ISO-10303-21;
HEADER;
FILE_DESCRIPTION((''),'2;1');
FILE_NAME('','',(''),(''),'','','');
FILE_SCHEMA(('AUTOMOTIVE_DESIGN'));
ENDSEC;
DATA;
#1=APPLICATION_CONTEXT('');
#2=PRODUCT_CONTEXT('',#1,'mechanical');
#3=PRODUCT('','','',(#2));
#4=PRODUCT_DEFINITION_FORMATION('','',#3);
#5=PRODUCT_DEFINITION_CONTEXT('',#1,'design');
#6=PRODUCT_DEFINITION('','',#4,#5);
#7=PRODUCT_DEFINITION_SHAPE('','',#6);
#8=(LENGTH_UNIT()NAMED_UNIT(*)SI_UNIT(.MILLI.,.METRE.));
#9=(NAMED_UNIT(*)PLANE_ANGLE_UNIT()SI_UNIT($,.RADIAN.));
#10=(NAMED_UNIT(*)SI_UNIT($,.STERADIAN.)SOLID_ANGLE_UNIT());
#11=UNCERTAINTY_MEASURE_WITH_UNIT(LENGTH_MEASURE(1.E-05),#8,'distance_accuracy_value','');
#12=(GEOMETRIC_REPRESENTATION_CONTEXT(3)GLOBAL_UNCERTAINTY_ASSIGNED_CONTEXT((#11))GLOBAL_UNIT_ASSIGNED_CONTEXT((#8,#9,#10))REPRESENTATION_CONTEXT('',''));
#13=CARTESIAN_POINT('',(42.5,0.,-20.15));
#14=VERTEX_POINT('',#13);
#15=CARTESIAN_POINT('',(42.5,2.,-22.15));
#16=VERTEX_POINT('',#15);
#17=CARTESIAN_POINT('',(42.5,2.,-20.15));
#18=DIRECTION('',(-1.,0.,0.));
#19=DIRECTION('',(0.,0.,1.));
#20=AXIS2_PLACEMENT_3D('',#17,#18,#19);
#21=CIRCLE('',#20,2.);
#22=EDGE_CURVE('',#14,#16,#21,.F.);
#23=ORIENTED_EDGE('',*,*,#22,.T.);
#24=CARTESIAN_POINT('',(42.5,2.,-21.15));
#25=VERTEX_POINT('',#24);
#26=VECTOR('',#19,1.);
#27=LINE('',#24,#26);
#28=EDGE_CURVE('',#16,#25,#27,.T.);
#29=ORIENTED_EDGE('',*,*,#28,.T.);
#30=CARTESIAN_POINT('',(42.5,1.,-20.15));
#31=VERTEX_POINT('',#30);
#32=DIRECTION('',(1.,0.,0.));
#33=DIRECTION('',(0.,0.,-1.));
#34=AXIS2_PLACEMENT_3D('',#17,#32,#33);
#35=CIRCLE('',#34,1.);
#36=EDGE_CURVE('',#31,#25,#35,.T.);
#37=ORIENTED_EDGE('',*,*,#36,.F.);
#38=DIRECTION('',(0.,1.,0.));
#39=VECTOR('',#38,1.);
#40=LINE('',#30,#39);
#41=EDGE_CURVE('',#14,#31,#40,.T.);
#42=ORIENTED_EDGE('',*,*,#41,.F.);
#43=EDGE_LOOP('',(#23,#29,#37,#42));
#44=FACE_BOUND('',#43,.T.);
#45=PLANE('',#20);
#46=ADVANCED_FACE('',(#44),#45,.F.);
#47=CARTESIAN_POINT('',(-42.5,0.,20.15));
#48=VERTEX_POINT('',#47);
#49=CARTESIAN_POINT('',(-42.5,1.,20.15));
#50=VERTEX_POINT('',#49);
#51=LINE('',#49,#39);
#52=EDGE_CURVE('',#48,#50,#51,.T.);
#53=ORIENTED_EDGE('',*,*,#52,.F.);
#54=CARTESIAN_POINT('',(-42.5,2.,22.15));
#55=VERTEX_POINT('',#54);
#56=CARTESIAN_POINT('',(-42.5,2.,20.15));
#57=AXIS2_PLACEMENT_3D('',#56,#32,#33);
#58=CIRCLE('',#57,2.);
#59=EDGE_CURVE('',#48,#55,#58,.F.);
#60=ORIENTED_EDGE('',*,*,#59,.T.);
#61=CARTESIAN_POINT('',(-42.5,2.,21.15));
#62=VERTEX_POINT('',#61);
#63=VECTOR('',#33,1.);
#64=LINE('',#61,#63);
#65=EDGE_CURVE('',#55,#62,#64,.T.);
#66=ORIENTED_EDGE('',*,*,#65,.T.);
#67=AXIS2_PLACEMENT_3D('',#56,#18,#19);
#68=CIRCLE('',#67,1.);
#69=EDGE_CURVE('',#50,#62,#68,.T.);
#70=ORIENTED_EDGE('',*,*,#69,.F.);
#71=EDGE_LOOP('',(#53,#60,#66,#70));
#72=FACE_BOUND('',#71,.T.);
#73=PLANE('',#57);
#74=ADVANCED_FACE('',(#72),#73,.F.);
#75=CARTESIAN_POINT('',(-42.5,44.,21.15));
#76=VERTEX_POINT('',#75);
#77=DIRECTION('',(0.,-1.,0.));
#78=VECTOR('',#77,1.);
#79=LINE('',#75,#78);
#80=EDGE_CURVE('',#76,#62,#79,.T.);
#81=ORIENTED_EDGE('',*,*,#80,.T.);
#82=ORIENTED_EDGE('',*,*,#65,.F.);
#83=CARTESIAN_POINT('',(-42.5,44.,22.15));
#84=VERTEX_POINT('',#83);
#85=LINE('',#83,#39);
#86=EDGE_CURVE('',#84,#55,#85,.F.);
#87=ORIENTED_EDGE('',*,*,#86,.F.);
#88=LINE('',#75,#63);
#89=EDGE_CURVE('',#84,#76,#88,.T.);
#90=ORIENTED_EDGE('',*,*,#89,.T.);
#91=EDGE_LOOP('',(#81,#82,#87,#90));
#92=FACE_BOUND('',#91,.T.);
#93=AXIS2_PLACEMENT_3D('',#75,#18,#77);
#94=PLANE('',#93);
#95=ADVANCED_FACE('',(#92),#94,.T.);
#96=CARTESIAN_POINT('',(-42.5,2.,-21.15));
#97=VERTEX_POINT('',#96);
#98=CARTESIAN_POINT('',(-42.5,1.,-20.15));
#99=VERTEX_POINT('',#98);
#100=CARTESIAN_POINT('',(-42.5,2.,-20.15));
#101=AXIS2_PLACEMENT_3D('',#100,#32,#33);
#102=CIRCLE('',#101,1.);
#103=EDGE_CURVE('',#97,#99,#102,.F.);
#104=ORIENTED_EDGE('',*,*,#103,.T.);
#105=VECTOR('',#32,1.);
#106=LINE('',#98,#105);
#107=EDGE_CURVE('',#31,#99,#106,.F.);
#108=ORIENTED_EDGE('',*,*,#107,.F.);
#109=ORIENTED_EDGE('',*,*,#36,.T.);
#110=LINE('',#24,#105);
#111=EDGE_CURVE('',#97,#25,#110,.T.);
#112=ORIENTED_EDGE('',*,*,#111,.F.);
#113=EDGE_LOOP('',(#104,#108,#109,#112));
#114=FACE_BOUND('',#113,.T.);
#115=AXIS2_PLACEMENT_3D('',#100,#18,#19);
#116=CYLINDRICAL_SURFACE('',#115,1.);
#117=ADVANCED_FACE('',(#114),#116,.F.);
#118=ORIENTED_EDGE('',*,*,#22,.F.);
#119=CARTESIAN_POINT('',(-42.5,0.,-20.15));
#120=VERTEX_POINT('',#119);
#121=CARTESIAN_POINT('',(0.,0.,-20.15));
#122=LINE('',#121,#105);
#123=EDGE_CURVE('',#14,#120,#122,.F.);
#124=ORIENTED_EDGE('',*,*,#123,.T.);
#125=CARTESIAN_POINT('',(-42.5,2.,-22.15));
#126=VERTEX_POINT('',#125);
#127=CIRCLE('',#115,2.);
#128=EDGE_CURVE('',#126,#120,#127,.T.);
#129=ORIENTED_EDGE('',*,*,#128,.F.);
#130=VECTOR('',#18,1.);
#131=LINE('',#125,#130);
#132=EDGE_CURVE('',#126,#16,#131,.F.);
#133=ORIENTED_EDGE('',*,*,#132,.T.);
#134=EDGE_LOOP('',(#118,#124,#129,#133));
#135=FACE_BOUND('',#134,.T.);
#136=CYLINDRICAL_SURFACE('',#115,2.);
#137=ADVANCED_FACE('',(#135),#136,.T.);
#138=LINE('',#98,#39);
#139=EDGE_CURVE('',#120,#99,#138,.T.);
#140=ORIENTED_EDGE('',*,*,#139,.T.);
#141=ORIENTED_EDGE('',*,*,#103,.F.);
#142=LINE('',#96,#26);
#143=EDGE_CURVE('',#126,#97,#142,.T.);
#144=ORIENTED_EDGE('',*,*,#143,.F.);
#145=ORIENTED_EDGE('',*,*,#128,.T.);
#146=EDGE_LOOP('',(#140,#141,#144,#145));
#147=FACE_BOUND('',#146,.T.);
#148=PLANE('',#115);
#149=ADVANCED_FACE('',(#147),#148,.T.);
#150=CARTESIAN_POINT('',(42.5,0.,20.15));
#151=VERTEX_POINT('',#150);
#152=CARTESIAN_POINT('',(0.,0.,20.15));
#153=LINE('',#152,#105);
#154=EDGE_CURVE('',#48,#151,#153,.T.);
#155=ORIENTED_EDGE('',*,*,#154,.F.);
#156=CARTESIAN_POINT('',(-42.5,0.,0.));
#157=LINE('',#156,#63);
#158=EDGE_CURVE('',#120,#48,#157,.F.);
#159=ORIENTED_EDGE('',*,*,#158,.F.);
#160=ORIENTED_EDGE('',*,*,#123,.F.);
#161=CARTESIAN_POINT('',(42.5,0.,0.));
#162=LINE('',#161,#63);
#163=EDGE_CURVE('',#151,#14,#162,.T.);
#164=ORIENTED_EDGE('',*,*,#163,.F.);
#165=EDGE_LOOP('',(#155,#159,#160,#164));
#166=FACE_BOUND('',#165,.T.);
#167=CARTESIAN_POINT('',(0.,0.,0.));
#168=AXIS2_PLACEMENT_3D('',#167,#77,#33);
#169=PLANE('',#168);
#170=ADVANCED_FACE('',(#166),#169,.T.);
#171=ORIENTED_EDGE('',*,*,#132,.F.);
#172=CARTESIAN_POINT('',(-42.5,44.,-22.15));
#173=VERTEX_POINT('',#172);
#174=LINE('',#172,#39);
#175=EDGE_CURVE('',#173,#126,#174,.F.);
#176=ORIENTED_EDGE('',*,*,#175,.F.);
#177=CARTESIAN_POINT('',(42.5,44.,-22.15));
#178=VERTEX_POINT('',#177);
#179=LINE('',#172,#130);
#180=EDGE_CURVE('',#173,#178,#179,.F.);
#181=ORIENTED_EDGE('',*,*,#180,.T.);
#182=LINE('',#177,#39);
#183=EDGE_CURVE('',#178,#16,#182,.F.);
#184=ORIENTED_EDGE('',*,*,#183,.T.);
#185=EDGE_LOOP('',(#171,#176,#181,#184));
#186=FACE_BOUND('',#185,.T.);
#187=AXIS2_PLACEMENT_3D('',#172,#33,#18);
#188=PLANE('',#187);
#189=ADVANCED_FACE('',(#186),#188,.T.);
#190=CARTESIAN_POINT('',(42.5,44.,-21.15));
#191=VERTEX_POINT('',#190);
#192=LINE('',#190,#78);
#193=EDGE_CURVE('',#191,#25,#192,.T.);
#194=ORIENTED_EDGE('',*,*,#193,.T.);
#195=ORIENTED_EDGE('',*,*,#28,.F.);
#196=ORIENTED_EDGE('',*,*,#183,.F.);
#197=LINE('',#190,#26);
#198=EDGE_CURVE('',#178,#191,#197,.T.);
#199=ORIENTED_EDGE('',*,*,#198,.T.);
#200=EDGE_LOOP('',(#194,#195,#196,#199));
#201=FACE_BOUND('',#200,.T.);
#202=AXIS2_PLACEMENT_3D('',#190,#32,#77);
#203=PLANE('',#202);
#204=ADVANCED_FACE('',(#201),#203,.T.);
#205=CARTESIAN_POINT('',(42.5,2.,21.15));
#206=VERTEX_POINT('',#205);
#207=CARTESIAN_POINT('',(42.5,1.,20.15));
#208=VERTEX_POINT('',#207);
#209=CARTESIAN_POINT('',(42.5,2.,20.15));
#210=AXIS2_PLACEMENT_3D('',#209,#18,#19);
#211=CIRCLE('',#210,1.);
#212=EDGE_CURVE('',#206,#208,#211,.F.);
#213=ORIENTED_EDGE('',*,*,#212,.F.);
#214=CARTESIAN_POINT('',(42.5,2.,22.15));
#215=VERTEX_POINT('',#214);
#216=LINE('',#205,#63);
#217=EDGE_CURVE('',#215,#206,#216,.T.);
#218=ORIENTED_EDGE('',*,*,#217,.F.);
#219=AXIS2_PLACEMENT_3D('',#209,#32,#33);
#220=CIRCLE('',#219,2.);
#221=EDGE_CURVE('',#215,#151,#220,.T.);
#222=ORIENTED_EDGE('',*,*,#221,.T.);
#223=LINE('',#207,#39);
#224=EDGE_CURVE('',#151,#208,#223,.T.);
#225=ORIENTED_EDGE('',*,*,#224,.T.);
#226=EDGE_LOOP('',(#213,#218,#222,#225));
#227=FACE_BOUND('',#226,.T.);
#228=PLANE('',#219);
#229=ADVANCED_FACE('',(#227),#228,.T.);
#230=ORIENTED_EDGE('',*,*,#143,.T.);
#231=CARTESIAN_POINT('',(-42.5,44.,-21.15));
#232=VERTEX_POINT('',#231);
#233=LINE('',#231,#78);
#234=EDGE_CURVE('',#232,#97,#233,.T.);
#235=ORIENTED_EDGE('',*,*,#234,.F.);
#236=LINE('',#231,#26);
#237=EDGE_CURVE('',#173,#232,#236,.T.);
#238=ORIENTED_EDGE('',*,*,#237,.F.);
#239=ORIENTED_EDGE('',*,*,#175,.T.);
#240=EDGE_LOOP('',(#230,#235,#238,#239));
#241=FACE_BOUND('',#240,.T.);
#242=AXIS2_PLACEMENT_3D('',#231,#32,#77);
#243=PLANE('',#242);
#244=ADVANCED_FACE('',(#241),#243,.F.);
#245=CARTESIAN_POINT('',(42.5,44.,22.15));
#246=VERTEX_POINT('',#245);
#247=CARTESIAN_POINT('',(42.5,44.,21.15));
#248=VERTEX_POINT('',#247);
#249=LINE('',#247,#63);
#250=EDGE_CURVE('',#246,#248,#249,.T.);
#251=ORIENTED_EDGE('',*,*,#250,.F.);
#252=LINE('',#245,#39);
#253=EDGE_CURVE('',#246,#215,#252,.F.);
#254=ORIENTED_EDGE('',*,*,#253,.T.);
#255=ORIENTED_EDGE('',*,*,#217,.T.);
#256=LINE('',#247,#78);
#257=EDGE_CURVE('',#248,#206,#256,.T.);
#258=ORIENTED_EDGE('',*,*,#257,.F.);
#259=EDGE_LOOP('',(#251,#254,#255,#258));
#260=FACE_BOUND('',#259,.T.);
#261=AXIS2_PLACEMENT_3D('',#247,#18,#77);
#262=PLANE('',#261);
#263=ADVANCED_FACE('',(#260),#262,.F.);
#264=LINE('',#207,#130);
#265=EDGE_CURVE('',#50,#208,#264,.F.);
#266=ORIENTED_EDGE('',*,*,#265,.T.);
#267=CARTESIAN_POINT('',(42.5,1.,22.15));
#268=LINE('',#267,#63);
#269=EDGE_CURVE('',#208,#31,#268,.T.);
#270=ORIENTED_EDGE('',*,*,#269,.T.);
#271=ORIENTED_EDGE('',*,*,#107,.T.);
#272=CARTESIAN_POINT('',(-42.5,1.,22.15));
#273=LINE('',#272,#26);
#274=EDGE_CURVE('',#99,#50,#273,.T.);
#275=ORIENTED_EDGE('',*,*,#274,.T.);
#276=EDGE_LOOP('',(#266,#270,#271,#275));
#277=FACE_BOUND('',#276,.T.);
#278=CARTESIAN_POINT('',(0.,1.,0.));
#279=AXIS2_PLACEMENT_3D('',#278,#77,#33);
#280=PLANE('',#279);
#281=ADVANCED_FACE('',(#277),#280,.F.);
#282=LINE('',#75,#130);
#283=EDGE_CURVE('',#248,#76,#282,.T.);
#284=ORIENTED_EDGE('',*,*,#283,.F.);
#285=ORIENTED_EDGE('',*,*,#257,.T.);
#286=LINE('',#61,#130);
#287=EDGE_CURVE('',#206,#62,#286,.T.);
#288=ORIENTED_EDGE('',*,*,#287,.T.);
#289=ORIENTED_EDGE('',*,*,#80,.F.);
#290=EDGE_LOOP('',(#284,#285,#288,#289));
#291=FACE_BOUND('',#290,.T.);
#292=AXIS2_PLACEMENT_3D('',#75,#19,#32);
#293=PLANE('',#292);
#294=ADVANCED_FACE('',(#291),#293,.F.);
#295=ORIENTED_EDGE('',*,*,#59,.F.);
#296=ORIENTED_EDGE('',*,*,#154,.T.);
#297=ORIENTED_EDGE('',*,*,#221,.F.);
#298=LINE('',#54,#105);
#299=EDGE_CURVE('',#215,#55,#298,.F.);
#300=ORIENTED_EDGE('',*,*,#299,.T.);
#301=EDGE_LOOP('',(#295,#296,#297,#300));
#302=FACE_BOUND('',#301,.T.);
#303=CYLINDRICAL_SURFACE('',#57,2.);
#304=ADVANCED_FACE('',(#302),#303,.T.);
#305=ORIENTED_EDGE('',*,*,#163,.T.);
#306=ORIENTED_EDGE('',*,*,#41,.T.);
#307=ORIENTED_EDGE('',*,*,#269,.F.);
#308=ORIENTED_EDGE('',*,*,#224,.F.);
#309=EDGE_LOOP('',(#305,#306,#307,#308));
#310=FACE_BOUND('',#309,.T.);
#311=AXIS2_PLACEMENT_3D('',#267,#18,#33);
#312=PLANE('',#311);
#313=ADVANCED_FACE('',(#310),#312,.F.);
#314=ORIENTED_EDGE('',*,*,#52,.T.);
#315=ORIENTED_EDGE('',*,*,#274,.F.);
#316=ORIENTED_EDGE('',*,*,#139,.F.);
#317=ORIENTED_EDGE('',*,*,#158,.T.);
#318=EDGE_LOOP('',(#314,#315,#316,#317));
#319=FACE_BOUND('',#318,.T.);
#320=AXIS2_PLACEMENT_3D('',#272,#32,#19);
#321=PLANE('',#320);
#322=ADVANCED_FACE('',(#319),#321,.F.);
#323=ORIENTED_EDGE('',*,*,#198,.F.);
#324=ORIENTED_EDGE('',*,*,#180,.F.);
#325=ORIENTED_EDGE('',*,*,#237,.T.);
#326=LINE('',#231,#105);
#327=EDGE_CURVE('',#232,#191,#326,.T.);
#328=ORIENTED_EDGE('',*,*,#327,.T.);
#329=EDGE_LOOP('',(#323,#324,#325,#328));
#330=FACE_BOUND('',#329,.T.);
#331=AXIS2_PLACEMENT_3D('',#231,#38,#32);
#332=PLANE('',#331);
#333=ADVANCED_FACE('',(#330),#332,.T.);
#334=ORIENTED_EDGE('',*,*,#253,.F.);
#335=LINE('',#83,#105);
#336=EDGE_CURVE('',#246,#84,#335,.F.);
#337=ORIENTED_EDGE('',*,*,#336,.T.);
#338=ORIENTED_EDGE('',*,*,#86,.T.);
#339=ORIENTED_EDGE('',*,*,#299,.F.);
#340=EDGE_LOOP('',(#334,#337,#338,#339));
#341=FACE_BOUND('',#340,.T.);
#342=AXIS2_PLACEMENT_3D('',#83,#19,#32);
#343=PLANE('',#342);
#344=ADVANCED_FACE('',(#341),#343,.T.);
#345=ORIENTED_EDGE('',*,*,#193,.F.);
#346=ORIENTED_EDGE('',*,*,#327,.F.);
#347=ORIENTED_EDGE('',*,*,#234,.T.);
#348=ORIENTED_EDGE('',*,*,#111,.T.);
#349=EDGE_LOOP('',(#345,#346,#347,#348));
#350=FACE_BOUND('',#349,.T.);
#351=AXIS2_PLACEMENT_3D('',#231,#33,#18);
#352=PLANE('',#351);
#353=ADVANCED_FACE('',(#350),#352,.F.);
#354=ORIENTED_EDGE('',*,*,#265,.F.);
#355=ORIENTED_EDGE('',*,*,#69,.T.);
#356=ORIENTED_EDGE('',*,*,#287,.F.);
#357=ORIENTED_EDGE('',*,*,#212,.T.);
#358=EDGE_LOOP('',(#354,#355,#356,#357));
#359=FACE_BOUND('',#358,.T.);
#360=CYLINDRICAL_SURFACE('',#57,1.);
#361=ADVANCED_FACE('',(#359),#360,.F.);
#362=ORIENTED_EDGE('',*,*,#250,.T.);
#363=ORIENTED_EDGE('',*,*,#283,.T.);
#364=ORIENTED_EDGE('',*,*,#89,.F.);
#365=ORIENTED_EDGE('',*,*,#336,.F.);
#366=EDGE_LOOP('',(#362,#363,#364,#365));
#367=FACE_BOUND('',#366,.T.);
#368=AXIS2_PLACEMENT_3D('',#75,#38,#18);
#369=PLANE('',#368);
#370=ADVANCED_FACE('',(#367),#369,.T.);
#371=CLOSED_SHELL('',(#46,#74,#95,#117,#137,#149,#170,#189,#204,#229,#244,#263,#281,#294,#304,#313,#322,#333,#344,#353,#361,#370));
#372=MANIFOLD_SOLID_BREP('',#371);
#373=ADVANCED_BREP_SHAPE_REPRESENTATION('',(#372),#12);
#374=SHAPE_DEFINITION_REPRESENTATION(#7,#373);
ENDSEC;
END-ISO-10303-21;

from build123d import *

# Parameters (mm, degrees)
SZKIC2_W                    = 85
SZKIC2_H                    = 44.3
DODANIE_WYCI_GNI_CIE1_DEPTH = 1
SZKIC7_W                    = 85
SZKIC7_H                    = 1
DODANIE_WYCI_GNI_CIE2_DEPTH = 43
KONWERTUJ_START             = -42.5
KONWERTUJ_BRY_1_DEPTH       = 85
KONWERTUJ_BRY_1_2_DEPTH     = 85


# Read off the part's stored shape, not the designer's step: Konwertuj bryłę1
with BuildPart() as part:
    # Szkic2 → Dodanie-wyciągnięcie1 (new body)
    with BuildSketch(Plane(origin=(0, 0, 0), x_dir=(1, 0, 0), z_dir=(0, 1, 0))):
        Rectangle(SZKIC2_W, SZKIC2_H)
    extrude(amount=DODANIE_WYCI_GNI_CIE1_DEPTH)

    # Szkic7 → Dodanie-wyciągnięcie2 (add)
    with BuildSketch(Plane(origin=(0, 1, 0), x_dir=(1, 0, 0), z_dir=(0, 1, 0))):
        with Locations((0, 21.65)):
            Rectangle(SZKIC7_W, SZKIC7_H)
        with Locations((0, -21.65)):
            Rectangle(SZKIC7_W, SZKIC7_H)
    extrude(amount=DODANIE_WYCI_GNI_CIE2_DEPTH)

    # Konwertuj bryłę1 outline → Konwertuj bryłę1 (cut)
    with BuildSketch(Plane.YZ.offset(KONWERTUJ_START)):
        with BuildLine():
            ThreePointArc((2, -22.15), (0.585786438, -21.564213562), (0, -20.15))
            Line((0, -20.15), (0, -22.15))
            Line((0, -22.15), (2, -22.15))
        make_face()
        with BuildLine():
            ThreePointArc((0, 20.15), (0.585786438, 21.564213562), (2, 22.15))
            Line((2, 22.15), (0, 22.15))
            Line((0, 22.15), (0, 20.15))
        make_face()
    extrude(amount=KONWERTUJ_BRY_1_DEPTH, mode=Mode.SUBTRACT)

    # Konwertuj bry_1 2 outline → Konwertuj bry_1 2 (add)
    with BuildSketch(Plane.YZ.offset(KONWERTUJ_START)):
        with BuildLine():
            ThreePointArc((2, -21.15), (1.292893219, -20.857106781), (1, -20.15))
            Line((1, -20.15), (1, -21.15))
            Line((1, -21.15), (2, -21.15))
        make_face()
        with BuildLine():
            ThreePointArc((1, 20.15), (1.292893219, 20.857106781), (2, 21.15))
            Line((2, 21.15), (1, 21.15))
            Line((1, 21.15), (1, 20.15))
        make_face()
    extrude(amount=KONWERTUJ_BRY_1_2_DEPTH)


solid = part.part
